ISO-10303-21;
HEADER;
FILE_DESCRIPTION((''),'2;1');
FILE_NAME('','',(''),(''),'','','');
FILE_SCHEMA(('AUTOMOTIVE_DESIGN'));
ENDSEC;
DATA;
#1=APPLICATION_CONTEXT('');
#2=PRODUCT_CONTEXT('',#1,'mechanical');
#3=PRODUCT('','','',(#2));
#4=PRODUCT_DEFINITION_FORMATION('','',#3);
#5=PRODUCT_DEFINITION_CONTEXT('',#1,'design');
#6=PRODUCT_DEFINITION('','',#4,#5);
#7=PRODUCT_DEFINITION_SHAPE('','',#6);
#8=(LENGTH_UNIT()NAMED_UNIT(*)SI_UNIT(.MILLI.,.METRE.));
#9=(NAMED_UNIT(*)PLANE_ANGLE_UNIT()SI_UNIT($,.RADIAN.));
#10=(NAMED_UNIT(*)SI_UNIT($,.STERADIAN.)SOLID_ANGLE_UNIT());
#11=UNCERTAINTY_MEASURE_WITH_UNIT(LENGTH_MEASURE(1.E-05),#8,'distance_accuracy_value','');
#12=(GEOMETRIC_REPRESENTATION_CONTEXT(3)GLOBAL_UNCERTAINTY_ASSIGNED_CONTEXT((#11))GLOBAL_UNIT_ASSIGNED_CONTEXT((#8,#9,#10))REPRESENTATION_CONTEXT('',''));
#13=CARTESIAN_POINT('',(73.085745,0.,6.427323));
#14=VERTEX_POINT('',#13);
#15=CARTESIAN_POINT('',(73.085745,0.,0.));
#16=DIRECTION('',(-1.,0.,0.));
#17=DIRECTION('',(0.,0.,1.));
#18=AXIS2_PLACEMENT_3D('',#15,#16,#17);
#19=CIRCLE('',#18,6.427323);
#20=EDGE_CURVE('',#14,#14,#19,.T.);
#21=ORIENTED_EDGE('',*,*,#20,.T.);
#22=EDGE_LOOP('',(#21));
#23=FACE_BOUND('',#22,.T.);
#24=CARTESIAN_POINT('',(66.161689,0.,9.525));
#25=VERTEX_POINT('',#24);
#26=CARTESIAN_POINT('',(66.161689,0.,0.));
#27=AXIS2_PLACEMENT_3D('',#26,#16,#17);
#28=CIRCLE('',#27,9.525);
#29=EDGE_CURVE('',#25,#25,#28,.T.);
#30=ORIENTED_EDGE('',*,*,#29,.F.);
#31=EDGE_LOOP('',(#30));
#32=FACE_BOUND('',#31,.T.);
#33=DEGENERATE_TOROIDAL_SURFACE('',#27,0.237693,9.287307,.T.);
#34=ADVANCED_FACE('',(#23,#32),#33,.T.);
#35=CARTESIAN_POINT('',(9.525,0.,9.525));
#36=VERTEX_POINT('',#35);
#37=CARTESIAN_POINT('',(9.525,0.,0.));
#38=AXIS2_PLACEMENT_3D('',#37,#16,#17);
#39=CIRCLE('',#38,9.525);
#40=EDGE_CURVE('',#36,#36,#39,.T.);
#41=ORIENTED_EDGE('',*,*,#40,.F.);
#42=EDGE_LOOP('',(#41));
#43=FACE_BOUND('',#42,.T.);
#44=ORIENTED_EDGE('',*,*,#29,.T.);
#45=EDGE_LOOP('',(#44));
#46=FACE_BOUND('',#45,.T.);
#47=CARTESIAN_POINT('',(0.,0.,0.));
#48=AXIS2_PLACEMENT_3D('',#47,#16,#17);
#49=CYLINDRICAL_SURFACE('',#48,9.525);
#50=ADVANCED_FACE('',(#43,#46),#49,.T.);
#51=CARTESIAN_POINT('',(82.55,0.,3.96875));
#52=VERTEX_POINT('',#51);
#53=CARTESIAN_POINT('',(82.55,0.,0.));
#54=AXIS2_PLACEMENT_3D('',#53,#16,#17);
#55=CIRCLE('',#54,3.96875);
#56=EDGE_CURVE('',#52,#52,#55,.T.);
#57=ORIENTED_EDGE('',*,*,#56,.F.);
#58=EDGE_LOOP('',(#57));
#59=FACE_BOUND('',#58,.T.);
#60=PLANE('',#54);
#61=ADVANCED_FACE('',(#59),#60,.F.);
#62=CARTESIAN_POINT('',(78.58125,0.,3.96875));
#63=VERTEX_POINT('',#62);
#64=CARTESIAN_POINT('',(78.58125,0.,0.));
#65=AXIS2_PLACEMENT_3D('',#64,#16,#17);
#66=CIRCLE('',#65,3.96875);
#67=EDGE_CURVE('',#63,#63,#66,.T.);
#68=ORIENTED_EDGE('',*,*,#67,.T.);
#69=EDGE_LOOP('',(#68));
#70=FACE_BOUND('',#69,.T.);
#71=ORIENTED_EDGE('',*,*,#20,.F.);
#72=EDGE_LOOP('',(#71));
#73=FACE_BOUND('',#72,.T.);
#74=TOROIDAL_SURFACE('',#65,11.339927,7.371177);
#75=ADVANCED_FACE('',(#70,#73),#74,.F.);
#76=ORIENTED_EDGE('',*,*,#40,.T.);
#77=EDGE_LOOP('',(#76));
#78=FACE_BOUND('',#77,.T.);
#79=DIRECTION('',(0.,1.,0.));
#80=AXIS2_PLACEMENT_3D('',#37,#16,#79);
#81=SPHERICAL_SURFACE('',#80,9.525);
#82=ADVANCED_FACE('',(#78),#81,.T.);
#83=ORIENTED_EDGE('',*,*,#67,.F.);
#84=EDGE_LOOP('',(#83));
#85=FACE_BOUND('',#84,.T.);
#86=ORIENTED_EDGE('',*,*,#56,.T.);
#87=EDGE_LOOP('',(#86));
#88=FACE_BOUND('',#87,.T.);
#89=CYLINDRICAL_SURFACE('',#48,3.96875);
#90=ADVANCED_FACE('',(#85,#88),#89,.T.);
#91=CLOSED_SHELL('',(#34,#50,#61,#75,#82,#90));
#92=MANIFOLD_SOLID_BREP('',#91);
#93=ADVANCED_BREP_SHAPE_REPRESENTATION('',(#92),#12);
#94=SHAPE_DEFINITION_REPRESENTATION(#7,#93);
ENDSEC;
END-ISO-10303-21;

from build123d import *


with BuildPart() as part:
    # Sketch1 → Revolve1 (revolve)
    with BuildSketch(Plane.XY):
        with BuildLine():
            ThreePointArc((9.525, 9.525), (2.789807909, 6.735192091), (0, 0))
            Line((0, 0), (82.55, 0))
            Line((82.55, 0), (82.55, 3.96875))
            Line((82.55, 3.96875), (78.58125, 3.96875))
            ThreePointArc((78.58125, 3.96875), (75.571052406, 4.611408496), (73.085744926, 6.427323204))
            ThreePointArc((73.085744926, 6.427323204), (69.954384305, 8.715283085), (66.161688922, 9.525))
            Line((66.161688922, 9.525), (9.525, 9.525))
        make_face()
    revolve(axis=Axis((0, 0, 0), (1, 0, 0)))


solid = part.part
